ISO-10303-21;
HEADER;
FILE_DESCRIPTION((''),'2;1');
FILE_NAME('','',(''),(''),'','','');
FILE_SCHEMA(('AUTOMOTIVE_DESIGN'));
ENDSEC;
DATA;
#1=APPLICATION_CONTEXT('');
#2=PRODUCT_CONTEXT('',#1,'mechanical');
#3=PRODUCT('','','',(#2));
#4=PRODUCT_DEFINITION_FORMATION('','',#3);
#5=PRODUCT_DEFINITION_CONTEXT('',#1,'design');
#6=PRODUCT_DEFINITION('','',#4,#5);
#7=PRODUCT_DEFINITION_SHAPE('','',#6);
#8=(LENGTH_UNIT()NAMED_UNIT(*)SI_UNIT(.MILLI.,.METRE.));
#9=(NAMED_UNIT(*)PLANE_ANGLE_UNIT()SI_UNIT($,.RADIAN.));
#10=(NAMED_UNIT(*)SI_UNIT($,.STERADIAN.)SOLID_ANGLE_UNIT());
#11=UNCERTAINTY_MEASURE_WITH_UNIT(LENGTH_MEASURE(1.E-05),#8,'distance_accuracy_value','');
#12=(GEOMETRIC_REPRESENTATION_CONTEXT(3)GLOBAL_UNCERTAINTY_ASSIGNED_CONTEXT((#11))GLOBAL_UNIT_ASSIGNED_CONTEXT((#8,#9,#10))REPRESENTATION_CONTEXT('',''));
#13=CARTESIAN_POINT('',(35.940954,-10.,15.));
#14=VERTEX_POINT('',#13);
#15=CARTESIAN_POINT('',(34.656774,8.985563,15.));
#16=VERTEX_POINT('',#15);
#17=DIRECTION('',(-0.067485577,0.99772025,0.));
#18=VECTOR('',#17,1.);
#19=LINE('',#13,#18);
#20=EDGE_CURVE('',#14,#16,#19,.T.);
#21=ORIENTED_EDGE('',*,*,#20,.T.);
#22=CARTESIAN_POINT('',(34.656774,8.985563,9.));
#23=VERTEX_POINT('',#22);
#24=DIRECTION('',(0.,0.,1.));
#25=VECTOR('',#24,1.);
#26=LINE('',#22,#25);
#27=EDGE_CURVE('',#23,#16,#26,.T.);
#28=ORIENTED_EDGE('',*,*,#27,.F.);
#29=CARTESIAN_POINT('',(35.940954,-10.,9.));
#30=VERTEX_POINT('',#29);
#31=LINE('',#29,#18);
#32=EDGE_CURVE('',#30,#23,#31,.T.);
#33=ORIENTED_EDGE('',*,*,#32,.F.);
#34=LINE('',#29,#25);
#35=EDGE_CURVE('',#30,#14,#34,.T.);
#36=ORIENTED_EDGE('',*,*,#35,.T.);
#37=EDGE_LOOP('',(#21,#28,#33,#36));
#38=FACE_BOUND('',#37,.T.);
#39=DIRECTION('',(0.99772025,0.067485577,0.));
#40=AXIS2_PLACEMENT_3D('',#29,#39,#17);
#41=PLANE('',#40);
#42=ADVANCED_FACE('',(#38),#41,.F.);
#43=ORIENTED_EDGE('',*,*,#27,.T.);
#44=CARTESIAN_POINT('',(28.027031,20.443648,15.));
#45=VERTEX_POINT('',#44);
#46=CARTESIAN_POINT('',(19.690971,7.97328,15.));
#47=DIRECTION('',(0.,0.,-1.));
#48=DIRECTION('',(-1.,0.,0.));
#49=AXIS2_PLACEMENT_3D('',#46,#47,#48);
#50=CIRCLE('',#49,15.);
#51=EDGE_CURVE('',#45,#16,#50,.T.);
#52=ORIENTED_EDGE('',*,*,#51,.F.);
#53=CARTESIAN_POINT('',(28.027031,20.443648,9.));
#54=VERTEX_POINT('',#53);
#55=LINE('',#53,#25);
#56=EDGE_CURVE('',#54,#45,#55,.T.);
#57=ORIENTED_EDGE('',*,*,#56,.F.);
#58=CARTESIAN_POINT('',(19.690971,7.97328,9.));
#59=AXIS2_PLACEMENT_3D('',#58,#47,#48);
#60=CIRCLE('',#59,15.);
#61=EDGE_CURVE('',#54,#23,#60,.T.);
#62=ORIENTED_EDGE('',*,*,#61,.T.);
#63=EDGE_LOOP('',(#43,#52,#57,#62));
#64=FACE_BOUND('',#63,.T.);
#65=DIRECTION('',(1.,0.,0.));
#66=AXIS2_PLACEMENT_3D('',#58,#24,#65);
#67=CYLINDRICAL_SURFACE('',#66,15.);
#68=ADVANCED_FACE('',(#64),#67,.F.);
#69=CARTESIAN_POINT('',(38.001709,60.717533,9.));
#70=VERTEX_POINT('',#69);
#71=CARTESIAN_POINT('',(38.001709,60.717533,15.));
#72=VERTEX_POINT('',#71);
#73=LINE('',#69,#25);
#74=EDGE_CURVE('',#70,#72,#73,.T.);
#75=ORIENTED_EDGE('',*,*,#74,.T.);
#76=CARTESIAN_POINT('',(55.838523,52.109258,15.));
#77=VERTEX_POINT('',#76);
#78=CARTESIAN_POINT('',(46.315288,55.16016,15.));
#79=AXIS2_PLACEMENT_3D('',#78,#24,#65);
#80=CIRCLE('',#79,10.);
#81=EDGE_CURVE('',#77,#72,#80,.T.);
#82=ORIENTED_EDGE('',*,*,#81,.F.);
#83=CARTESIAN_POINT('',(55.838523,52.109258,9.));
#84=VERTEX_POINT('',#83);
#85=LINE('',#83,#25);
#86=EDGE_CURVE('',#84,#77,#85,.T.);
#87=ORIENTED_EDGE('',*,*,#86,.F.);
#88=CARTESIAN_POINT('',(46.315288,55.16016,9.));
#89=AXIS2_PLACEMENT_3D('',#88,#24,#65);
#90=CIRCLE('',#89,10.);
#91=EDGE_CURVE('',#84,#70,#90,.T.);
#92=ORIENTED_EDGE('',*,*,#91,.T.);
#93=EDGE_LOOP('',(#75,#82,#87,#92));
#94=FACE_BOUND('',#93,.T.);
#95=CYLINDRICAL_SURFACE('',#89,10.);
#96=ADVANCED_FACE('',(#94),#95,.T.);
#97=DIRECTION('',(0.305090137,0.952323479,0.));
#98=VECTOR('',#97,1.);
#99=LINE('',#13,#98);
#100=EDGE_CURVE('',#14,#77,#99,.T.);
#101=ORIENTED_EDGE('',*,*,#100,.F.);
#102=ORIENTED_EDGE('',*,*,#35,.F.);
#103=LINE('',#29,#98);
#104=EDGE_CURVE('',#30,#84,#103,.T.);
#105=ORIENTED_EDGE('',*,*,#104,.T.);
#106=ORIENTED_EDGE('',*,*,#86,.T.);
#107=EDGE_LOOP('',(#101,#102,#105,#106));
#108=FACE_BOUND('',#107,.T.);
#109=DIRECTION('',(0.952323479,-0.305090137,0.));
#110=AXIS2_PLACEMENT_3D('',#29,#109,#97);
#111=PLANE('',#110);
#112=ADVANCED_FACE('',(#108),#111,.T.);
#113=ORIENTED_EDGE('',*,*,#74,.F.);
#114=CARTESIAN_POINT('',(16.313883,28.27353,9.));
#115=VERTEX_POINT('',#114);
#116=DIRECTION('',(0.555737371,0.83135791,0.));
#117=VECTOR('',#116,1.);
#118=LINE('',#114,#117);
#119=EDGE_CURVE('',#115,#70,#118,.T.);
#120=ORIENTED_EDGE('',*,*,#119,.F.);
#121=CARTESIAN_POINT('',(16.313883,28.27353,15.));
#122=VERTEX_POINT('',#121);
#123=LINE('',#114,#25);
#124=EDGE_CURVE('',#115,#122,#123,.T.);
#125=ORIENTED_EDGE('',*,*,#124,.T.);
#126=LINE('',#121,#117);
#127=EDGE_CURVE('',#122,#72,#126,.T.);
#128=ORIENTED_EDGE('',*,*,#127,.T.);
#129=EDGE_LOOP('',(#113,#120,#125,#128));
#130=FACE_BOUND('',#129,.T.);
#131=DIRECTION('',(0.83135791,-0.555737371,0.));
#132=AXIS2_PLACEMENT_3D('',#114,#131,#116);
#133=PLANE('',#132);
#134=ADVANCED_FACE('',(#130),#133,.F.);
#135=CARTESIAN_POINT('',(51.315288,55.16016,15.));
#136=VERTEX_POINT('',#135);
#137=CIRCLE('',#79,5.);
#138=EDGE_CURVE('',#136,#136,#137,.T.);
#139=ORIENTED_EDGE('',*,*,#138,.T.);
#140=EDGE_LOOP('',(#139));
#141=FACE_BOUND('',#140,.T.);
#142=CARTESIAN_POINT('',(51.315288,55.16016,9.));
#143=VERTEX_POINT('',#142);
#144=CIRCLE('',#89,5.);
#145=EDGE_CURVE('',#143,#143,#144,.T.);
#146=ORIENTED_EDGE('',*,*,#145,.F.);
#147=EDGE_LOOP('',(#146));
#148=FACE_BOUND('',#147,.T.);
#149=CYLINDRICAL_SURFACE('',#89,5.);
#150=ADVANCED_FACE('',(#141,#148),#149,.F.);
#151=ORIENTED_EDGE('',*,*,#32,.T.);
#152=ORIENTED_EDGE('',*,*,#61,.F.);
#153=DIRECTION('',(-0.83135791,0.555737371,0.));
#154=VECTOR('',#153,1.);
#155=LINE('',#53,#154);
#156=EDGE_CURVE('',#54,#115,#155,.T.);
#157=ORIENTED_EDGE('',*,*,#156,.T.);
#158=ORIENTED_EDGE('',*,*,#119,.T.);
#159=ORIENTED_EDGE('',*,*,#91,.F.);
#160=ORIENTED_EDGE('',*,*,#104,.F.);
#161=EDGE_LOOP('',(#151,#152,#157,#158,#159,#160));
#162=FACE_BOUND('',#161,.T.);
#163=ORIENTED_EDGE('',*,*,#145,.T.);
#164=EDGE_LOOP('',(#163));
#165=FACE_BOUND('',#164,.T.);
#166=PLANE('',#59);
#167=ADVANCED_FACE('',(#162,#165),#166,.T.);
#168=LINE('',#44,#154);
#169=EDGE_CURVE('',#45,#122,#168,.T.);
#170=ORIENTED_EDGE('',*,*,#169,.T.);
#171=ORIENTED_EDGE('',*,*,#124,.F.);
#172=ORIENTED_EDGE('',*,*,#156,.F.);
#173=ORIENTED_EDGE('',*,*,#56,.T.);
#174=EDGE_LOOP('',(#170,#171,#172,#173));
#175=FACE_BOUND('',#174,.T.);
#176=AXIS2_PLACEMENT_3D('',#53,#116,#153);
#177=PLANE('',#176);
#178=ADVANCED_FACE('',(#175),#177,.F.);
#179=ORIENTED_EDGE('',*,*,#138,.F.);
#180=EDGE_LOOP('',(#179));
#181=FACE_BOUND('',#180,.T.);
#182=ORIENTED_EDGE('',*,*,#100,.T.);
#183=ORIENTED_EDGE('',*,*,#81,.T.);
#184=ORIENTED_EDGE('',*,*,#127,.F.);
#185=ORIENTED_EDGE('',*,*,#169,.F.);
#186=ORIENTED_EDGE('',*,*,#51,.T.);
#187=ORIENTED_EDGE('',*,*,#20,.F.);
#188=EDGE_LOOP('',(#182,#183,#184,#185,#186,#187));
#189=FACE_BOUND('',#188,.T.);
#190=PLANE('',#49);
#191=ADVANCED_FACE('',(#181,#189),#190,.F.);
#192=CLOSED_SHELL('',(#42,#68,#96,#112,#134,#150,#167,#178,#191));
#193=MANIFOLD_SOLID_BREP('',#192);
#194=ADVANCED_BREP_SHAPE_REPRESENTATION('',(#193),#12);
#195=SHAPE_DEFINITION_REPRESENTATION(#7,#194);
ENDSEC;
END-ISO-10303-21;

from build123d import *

# Parameters (mm, degrees)
BASE_EXTRUDE_DEPTH = 6
HOLE1_START        = 9
HOLE1_OUTLINE_R    = 5
HOLE1_DEPTH        = 6


# Read off the part's stored shape, not the designer's step: Hole1
with BuildPart() as part:
    # Sketch1 → Base-Extrude (new body)
    with BuildSketch(Plane(origin=(0, 0, 15), x_dir=(-1, 0, 0), z_dir=(0, 0, -1))):
        with BuildLine():
            Line((-35.94095366, -10), (-34.656774357, 8.985563209))
            ThreePointArc((-34.656774357, 8.985563209), (-32.674273273, 15.485526346), (-28.02703118, 20.443648194))
            Line((-28.02703118, 20.443648194), (-16.313883273, 28.273529827))
            Line((-16.313883273, 28.273529827), (-38.001708808, 60.717533475))
            ThreePointArc((-38.001708808, 60.717533475), (-50.661713644, 64.166190146), (-55.838522693, 52.109258389))
            Line((-55.838522693, 52.109258389), (-35.94095366, -10))
        make_face()
    extrude(amount=BASE_EXTRUDE_DEPTH)

    # Hole1 outline → Hole1 (cut)
    with BuildSketch(Plane.XY.offset(HOLE1_START)):
        with Locations((46.315287905, 55.160159761)):
            Circle(HOLE1_OUTLINE_R)
    extrude(amount=HOLE1_DEPTH, mode=Mode.SUBTRACT)


solid = part.part
